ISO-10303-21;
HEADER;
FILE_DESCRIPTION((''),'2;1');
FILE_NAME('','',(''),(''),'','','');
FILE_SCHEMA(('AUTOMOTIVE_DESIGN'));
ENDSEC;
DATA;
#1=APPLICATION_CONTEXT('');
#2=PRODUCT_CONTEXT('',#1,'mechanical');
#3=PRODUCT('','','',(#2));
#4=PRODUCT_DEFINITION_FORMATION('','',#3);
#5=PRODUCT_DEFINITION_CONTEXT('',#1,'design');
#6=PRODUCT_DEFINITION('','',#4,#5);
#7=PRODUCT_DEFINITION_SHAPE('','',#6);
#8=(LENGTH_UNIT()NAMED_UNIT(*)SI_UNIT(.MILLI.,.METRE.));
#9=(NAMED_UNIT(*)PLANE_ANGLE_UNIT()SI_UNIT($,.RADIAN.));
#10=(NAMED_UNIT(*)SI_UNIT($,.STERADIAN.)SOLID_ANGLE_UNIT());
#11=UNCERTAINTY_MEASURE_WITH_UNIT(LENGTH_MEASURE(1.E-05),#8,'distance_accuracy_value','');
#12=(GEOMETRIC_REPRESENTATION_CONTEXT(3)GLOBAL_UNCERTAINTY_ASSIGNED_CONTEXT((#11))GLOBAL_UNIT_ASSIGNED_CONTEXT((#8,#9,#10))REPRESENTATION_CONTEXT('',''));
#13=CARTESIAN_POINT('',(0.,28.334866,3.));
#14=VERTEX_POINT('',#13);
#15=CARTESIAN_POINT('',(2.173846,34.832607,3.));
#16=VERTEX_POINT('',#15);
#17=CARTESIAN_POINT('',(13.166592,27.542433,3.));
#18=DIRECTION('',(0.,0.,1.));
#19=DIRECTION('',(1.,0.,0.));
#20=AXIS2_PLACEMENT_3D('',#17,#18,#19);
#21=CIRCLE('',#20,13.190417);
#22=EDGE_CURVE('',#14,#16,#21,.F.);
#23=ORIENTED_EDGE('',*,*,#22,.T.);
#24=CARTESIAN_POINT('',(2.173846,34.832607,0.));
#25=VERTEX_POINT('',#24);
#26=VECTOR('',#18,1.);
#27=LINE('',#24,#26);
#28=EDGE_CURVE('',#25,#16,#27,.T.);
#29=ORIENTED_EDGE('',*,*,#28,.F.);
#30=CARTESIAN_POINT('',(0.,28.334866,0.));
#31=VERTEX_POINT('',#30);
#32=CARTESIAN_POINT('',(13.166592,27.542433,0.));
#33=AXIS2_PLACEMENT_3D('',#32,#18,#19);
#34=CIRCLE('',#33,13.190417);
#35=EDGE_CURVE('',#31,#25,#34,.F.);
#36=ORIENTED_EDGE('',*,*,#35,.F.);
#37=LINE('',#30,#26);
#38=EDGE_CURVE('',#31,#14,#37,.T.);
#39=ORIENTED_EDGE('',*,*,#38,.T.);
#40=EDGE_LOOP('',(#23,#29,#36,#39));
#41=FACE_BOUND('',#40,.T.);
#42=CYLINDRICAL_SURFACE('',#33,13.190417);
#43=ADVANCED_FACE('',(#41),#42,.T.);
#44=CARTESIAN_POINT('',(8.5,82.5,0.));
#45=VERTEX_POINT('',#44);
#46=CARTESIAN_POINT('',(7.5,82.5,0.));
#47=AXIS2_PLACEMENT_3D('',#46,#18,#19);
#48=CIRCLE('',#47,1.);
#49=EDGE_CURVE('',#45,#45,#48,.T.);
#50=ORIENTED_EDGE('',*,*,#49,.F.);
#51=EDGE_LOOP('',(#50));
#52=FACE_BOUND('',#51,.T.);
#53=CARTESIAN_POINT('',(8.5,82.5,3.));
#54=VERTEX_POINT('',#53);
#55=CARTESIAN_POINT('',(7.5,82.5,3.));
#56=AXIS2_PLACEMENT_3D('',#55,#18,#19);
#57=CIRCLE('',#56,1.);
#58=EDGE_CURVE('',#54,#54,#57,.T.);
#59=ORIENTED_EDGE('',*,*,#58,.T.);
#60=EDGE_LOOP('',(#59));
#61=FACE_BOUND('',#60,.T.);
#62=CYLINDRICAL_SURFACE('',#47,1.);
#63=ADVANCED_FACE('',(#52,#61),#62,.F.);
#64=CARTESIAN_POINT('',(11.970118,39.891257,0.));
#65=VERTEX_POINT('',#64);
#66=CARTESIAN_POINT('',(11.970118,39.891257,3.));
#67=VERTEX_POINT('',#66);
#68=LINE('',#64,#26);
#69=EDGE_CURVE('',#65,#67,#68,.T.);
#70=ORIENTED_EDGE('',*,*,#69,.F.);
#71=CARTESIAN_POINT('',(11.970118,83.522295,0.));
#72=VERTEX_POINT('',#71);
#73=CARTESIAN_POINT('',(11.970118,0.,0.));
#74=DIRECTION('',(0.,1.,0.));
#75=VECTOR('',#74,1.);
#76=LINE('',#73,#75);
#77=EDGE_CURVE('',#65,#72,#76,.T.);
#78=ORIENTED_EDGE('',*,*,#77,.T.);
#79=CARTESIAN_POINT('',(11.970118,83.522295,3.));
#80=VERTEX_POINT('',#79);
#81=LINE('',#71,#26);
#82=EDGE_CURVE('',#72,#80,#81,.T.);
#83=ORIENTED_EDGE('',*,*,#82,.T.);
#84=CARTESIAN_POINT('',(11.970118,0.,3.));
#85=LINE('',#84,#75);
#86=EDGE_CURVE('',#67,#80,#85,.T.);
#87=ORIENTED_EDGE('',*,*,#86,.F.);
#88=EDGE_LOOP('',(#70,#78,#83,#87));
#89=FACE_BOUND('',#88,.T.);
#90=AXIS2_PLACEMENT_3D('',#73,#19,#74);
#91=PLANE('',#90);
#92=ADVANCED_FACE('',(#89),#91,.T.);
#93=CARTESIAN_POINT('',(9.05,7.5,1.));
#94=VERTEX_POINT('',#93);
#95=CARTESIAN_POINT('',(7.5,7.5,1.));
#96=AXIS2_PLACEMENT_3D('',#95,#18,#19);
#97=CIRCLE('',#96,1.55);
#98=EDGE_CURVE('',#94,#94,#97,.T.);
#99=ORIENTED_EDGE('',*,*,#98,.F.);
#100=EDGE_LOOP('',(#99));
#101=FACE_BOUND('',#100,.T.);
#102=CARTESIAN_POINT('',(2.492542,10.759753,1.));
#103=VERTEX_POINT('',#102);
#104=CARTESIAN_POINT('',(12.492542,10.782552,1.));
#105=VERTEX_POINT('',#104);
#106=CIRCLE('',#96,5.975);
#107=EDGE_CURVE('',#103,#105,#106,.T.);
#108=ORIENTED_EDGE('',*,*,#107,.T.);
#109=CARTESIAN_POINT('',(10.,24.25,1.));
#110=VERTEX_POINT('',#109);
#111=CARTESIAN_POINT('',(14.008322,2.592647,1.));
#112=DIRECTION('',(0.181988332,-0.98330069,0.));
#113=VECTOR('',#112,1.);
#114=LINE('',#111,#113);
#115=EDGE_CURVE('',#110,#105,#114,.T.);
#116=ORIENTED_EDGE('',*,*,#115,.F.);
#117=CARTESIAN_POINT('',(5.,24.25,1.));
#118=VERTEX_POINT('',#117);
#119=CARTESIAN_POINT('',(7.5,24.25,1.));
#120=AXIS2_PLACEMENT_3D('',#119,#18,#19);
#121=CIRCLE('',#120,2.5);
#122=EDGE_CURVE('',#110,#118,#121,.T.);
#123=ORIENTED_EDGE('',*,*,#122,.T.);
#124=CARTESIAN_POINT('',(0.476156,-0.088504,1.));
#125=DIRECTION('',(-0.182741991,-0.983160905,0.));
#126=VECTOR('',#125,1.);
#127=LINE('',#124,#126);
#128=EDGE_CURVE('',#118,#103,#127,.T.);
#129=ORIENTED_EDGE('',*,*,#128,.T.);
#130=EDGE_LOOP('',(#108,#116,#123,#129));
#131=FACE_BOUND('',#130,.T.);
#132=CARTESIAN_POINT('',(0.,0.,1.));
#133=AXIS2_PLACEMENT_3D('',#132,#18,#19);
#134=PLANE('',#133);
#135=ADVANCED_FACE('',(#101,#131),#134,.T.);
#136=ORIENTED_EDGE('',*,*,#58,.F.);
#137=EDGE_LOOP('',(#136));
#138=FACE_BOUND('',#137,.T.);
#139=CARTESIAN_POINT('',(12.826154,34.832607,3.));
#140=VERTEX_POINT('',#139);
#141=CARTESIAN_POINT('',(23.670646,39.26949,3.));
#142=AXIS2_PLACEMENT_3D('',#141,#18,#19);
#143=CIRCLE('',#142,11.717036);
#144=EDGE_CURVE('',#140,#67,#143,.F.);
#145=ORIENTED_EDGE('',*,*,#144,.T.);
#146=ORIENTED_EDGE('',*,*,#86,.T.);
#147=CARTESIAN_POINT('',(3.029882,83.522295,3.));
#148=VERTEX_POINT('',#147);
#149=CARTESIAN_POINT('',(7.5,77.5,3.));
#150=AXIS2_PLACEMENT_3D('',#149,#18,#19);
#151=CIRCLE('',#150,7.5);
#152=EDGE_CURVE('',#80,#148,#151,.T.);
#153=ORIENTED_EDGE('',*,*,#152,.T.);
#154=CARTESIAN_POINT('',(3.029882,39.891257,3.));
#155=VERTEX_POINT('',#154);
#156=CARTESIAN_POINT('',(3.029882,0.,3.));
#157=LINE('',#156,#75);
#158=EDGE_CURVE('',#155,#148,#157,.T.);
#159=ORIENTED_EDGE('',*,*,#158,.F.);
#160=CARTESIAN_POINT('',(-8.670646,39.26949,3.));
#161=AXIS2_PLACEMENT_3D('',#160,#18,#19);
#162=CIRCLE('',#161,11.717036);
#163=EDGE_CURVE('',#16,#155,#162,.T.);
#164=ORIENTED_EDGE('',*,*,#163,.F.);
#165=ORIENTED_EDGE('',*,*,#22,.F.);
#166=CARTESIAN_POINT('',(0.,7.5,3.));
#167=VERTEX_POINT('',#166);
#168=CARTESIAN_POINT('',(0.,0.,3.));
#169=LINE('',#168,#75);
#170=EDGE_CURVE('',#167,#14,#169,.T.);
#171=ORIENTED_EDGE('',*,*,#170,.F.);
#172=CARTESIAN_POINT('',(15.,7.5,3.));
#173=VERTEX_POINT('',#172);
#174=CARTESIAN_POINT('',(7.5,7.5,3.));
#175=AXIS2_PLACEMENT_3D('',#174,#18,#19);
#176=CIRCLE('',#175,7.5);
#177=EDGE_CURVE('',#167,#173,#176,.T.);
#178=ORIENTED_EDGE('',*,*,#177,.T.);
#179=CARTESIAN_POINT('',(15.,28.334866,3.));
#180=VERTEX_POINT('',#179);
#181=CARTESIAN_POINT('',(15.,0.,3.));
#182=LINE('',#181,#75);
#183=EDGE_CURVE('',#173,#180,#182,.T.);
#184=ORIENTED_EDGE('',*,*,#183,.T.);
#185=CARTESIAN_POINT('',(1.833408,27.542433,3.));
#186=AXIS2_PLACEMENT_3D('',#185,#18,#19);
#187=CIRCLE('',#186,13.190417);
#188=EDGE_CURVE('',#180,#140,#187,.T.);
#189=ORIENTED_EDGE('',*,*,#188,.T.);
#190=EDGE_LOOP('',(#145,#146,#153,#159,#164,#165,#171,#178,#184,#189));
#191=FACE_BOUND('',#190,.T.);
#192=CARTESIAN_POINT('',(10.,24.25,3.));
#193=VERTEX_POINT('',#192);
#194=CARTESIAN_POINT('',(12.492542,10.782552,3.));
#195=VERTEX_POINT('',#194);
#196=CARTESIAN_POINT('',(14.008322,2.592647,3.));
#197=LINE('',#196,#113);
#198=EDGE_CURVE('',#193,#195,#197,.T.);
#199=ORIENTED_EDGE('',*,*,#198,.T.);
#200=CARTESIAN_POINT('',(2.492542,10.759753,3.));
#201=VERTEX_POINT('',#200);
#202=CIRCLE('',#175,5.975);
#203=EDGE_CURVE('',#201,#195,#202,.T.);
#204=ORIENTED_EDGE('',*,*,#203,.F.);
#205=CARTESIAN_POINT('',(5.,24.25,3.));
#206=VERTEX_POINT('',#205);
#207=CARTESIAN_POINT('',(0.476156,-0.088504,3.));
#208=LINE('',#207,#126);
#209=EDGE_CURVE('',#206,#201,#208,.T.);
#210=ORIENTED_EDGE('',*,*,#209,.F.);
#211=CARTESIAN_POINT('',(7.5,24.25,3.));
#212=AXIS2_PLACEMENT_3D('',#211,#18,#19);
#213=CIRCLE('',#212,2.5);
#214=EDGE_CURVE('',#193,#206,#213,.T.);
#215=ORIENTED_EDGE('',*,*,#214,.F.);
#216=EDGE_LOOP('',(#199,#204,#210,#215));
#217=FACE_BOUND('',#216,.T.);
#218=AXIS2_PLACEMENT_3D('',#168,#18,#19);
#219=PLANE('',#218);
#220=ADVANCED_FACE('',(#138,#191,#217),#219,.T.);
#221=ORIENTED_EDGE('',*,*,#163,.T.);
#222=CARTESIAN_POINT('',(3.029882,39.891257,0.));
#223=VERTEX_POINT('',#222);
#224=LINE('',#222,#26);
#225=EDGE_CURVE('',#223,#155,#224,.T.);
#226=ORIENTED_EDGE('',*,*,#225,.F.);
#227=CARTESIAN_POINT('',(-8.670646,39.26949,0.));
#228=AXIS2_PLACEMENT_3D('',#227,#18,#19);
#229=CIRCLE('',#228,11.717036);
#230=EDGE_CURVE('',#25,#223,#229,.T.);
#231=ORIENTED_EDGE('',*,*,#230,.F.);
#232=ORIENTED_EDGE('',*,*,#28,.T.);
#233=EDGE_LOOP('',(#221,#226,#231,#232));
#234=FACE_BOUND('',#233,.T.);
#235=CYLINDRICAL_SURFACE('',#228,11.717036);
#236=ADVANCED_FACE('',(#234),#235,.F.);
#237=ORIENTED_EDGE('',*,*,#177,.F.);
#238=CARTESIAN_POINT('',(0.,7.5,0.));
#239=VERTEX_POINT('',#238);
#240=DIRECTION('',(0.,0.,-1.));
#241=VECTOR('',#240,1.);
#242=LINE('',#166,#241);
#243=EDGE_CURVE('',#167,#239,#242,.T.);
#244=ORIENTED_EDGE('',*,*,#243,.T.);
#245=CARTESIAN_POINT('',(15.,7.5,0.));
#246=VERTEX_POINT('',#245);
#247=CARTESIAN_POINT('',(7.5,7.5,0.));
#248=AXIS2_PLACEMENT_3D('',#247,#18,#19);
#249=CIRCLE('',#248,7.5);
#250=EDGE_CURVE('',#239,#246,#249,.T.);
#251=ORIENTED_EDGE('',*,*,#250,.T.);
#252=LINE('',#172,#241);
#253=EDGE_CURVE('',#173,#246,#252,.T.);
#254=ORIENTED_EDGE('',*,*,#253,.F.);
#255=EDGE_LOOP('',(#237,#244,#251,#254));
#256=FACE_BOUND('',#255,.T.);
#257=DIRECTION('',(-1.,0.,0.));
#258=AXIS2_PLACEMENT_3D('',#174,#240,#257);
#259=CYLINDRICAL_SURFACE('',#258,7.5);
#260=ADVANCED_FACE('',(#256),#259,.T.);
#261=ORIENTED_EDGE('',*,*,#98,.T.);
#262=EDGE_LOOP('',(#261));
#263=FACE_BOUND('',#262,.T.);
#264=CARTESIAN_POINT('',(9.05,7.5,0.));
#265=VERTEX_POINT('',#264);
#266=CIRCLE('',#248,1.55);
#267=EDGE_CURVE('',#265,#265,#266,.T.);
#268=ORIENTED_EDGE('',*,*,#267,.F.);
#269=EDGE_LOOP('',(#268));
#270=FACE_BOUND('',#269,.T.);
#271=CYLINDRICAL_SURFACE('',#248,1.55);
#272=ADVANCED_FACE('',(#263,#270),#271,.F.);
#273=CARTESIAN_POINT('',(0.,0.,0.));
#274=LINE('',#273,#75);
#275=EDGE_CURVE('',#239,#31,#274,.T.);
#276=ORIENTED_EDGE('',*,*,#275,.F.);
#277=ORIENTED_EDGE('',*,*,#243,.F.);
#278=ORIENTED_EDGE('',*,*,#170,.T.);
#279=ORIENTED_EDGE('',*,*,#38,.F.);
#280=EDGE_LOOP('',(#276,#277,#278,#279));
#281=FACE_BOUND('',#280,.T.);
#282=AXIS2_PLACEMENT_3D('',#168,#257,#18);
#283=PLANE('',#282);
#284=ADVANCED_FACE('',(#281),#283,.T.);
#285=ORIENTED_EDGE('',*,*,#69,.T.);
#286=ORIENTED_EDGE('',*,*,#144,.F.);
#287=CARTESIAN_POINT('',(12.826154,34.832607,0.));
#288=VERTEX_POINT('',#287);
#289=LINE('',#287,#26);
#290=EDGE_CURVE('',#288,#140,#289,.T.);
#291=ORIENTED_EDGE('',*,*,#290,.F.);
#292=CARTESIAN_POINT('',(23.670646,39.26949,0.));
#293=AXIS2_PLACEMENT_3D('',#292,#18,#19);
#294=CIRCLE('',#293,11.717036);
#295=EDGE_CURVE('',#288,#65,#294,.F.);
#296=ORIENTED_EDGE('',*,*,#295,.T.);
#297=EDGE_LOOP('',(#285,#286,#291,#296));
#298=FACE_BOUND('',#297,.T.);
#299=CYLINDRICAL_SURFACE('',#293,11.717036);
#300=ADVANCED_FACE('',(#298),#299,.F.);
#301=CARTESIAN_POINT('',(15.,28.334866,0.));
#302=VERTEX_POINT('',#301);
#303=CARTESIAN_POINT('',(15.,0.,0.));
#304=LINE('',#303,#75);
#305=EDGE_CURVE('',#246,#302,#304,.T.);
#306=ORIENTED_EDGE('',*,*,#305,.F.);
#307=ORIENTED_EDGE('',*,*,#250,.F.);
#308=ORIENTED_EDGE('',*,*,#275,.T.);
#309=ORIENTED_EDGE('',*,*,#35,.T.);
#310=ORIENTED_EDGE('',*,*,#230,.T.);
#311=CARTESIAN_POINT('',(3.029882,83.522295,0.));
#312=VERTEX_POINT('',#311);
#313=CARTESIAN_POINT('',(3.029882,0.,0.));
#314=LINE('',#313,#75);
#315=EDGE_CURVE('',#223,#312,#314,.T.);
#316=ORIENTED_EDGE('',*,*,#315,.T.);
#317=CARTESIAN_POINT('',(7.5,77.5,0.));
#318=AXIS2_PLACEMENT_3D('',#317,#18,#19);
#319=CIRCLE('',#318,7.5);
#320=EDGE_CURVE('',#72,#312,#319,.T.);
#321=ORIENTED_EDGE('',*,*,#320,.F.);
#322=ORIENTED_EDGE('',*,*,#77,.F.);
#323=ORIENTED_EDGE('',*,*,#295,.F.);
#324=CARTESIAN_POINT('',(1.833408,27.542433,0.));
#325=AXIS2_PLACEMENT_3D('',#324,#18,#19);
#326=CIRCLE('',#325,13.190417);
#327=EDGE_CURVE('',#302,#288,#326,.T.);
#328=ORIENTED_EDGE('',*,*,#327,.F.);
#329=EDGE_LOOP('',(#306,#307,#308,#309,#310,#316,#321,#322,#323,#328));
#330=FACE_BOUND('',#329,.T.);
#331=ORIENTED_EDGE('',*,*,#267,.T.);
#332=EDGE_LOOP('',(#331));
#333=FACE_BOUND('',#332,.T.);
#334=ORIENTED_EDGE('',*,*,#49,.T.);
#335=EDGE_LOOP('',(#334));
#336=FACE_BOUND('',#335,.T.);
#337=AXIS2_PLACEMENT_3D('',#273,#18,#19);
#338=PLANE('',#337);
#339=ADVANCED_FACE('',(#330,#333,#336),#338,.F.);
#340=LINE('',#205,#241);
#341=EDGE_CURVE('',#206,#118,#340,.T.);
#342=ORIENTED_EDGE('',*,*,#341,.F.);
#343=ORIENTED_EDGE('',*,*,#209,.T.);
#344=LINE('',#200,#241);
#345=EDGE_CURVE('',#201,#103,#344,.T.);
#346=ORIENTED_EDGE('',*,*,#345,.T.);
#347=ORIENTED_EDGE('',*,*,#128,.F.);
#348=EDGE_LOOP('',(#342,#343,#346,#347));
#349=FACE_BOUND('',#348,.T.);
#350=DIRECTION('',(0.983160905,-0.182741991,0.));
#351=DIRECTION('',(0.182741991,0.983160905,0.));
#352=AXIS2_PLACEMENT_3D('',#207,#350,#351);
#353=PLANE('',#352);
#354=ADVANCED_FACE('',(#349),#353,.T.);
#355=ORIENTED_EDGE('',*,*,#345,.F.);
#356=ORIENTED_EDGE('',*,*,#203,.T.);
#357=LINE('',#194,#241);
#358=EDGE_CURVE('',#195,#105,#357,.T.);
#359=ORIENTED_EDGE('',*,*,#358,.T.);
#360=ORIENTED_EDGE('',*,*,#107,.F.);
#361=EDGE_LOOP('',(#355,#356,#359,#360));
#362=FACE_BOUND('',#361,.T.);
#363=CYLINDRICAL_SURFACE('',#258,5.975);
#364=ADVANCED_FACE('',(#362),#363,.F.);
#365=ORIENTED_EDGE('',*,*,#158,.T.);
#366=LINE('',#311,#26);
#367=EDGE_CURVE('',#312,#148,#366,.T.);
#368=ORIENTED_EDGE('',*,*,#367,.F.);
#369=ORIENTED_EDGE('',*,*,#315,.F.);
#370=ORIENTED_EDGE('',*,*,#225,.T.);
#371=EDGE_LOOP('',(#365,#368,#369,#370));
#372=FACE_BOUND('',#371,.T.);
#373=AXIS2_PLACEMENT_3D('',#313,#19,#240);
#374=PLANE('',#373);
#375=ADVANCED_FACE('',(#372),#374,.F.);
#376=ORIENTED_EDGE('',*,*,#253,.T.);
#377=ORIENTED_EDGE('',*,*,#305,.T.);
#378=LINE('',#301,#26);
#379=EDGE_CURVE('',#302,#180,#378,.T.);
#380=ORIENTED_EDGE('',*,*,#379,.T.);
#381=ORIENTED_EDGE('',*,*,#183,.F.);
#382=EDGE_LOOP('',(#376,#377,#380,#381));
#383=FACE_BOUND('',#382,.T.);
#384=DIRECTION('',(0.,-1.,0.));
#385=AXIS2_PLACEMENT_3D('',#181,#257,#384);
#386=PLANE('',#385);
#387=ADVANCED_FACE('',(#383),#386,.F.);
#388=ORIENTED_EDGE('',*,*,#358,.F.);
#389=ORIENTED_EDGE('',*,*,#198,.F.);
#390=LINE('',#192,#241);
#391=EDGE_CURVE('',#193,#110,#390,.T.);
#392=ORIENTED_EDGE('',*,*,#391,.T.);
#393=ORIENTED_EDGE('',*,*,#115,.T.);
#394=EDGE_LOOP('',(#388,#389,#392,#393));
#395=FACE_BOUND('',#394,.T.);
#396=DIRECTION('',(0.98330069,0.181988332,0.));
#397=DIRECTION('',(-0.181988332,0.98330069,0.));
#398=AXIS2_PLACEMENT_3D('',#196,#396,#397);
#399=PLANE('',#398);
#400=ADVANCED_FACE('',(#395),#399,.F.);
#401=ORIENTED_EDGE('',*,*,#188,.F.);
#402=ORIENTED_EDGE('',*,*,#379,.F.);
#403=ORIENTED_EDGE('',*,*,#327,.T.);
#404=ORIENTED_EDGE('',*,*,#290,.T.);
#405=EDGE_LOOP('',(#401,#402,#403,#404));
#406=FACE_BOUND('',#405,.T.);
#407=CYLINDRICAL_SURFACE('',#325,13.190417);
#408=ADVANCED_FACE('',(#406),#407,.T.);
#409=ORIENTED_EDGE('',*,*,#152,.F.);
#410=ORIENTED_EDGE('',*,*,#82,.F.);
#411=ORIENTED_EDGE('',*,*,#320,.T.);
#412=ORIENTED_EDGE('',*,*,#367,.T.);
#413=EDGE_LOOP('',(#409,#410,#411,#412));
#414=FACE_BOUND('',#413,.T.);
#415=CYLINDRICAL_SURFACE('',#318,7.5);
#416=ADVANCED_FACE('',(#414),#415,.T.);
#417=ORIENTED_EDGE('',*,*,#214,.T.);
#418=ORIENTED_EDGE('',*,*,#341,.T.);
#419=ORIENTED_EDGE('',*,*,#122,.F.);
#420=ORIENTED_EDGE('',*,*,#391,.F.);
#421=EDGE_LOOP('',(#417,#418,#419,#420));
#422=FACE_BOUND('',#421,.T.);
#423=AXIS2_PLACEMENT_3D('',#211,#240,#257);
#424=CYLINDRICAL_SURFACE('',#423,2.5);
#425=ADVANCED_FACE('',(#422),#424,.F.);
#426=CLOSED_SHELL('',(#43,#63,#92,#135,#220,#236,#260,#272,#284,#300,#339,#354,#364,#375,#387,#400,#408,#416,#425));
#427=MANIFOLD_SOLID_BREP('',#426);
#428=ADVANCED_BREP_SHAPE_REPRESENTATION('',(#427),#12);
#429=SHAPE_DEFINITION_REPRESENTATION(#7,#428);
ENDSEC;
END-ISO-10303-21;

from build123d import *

# Parameters (mm, degrees)
BOSS_EXTRUDE1_DEPTH = 3
BOSS_EXTRUDE2_DEPTH = 1
SKETCH2_R           = 1
SKETCH2_R_2         = 1.55
CUT_EXTRUDE1_DEPTH  = 87.365502372


with BuildPart() as part:
    # Sketch1 → Boss-Extrude1 (new body)
    with BuildSketch(Plane.XY):
        with BuildLine():
            ThreePointArc((0, 7.5), (2.196699141, 2.196699141), (7.5, 0))
            ThreePointArc((7.5, 0), (12.803300859, 2.196699141), (15, 7.5))
            Line((15, 7.5), (15, 85))
            Line((15, 85), (0, 85))
            Line((0, 85), (0, 7.5))
        make_face()
        with BuildLine():
            Line((2.49254211, 10.759753131), (5, 24.25))
            ThreePointArc((5, 24.25), (7.5, 26.75), (10, 24.25))
            Line((10, 24.25), (12.49254211, 10.782552099))
            ThreePointArc((12.49254211, 10.782552099), (7.513622348, 1.525015529), (2.49254211, 10.759753131))
        make_face(mode=Mode.SUBTRACT)
    extrude(amount=BOSS_EXTRUDE1_DEPTH)

    # Sketch1<3> → Boss-Extrude2 (add)
    with BuildSketch(Plane.XY):
        with BuildLine():
            ThreePointArc((10, 24.25), (7.5, 26.75), (5, 24.25))
            Line((5, 24.25), (2.49254211, 10.759753131))
            ThreePointArc((2.49254211, 10.759753131), (7.513622348, 1.525015529), (12.49254211, 10.782552099))
            Line((12.49254211, 10.782552099), (10, 24.25))
        make_face()
    extrude(amount=BOSS_EXTRUDE2_DEPTH)

    # Sketch2 → Cut-Extrude1 (cut, through all)
    with BuildSketch(Plane.XY.offset(3)):
        with BuildLine():
            Line((15, 85), (7.5, 85))
            ThreePointArc((7.5, 85), (9.854016149, 84.620997681), (11.970118276, 83.522295459))
            Line((11.970118276, 83.522295459), (11.970118276, 39.891256895))
            ThreePointArc((11.970118276, 39.891256895), (12.117855654, 37.314502111), (12.826153951, 34.832606652))
            ThreePointArc((12.826153951, 34.832606652), (14.342347227, 31.727350556), (15, 28.334866171))
            Line((15, 28.334866171), (15, 85))
        make_face()
        with BuildLine():
            Line((7.5, 85), (0, 85))
            Line((0, 85), (0, 28.334866171))
            ThreePointArc((0, 28.334866171), (0.657652773, 31.727350556), (2.173846049, 34.832606652))
            ThreePointArc((2.173846049, 34.832606652), (2.882144346, 37.314502111), (3.029881724, 39.891256895))
            Line((3.029881724, 39.891256895), (3.029881724, 83.522295459))
            ThreePointArc((3.029881724, 83.522295459), (5.145983851, 84.620997681), (7.5, 85))
        make_face()
        with Locations((7.5, 82.5)):
            Circle(SKETCH2_R)
        with Locations((7.5, 7.5)):
            Circle(SKETCH2_R_2)
    extrude(amount=-CUT_EXTRUDE1_DEPTH, mode=Mode.SUBTRACT)


solid = part.part
